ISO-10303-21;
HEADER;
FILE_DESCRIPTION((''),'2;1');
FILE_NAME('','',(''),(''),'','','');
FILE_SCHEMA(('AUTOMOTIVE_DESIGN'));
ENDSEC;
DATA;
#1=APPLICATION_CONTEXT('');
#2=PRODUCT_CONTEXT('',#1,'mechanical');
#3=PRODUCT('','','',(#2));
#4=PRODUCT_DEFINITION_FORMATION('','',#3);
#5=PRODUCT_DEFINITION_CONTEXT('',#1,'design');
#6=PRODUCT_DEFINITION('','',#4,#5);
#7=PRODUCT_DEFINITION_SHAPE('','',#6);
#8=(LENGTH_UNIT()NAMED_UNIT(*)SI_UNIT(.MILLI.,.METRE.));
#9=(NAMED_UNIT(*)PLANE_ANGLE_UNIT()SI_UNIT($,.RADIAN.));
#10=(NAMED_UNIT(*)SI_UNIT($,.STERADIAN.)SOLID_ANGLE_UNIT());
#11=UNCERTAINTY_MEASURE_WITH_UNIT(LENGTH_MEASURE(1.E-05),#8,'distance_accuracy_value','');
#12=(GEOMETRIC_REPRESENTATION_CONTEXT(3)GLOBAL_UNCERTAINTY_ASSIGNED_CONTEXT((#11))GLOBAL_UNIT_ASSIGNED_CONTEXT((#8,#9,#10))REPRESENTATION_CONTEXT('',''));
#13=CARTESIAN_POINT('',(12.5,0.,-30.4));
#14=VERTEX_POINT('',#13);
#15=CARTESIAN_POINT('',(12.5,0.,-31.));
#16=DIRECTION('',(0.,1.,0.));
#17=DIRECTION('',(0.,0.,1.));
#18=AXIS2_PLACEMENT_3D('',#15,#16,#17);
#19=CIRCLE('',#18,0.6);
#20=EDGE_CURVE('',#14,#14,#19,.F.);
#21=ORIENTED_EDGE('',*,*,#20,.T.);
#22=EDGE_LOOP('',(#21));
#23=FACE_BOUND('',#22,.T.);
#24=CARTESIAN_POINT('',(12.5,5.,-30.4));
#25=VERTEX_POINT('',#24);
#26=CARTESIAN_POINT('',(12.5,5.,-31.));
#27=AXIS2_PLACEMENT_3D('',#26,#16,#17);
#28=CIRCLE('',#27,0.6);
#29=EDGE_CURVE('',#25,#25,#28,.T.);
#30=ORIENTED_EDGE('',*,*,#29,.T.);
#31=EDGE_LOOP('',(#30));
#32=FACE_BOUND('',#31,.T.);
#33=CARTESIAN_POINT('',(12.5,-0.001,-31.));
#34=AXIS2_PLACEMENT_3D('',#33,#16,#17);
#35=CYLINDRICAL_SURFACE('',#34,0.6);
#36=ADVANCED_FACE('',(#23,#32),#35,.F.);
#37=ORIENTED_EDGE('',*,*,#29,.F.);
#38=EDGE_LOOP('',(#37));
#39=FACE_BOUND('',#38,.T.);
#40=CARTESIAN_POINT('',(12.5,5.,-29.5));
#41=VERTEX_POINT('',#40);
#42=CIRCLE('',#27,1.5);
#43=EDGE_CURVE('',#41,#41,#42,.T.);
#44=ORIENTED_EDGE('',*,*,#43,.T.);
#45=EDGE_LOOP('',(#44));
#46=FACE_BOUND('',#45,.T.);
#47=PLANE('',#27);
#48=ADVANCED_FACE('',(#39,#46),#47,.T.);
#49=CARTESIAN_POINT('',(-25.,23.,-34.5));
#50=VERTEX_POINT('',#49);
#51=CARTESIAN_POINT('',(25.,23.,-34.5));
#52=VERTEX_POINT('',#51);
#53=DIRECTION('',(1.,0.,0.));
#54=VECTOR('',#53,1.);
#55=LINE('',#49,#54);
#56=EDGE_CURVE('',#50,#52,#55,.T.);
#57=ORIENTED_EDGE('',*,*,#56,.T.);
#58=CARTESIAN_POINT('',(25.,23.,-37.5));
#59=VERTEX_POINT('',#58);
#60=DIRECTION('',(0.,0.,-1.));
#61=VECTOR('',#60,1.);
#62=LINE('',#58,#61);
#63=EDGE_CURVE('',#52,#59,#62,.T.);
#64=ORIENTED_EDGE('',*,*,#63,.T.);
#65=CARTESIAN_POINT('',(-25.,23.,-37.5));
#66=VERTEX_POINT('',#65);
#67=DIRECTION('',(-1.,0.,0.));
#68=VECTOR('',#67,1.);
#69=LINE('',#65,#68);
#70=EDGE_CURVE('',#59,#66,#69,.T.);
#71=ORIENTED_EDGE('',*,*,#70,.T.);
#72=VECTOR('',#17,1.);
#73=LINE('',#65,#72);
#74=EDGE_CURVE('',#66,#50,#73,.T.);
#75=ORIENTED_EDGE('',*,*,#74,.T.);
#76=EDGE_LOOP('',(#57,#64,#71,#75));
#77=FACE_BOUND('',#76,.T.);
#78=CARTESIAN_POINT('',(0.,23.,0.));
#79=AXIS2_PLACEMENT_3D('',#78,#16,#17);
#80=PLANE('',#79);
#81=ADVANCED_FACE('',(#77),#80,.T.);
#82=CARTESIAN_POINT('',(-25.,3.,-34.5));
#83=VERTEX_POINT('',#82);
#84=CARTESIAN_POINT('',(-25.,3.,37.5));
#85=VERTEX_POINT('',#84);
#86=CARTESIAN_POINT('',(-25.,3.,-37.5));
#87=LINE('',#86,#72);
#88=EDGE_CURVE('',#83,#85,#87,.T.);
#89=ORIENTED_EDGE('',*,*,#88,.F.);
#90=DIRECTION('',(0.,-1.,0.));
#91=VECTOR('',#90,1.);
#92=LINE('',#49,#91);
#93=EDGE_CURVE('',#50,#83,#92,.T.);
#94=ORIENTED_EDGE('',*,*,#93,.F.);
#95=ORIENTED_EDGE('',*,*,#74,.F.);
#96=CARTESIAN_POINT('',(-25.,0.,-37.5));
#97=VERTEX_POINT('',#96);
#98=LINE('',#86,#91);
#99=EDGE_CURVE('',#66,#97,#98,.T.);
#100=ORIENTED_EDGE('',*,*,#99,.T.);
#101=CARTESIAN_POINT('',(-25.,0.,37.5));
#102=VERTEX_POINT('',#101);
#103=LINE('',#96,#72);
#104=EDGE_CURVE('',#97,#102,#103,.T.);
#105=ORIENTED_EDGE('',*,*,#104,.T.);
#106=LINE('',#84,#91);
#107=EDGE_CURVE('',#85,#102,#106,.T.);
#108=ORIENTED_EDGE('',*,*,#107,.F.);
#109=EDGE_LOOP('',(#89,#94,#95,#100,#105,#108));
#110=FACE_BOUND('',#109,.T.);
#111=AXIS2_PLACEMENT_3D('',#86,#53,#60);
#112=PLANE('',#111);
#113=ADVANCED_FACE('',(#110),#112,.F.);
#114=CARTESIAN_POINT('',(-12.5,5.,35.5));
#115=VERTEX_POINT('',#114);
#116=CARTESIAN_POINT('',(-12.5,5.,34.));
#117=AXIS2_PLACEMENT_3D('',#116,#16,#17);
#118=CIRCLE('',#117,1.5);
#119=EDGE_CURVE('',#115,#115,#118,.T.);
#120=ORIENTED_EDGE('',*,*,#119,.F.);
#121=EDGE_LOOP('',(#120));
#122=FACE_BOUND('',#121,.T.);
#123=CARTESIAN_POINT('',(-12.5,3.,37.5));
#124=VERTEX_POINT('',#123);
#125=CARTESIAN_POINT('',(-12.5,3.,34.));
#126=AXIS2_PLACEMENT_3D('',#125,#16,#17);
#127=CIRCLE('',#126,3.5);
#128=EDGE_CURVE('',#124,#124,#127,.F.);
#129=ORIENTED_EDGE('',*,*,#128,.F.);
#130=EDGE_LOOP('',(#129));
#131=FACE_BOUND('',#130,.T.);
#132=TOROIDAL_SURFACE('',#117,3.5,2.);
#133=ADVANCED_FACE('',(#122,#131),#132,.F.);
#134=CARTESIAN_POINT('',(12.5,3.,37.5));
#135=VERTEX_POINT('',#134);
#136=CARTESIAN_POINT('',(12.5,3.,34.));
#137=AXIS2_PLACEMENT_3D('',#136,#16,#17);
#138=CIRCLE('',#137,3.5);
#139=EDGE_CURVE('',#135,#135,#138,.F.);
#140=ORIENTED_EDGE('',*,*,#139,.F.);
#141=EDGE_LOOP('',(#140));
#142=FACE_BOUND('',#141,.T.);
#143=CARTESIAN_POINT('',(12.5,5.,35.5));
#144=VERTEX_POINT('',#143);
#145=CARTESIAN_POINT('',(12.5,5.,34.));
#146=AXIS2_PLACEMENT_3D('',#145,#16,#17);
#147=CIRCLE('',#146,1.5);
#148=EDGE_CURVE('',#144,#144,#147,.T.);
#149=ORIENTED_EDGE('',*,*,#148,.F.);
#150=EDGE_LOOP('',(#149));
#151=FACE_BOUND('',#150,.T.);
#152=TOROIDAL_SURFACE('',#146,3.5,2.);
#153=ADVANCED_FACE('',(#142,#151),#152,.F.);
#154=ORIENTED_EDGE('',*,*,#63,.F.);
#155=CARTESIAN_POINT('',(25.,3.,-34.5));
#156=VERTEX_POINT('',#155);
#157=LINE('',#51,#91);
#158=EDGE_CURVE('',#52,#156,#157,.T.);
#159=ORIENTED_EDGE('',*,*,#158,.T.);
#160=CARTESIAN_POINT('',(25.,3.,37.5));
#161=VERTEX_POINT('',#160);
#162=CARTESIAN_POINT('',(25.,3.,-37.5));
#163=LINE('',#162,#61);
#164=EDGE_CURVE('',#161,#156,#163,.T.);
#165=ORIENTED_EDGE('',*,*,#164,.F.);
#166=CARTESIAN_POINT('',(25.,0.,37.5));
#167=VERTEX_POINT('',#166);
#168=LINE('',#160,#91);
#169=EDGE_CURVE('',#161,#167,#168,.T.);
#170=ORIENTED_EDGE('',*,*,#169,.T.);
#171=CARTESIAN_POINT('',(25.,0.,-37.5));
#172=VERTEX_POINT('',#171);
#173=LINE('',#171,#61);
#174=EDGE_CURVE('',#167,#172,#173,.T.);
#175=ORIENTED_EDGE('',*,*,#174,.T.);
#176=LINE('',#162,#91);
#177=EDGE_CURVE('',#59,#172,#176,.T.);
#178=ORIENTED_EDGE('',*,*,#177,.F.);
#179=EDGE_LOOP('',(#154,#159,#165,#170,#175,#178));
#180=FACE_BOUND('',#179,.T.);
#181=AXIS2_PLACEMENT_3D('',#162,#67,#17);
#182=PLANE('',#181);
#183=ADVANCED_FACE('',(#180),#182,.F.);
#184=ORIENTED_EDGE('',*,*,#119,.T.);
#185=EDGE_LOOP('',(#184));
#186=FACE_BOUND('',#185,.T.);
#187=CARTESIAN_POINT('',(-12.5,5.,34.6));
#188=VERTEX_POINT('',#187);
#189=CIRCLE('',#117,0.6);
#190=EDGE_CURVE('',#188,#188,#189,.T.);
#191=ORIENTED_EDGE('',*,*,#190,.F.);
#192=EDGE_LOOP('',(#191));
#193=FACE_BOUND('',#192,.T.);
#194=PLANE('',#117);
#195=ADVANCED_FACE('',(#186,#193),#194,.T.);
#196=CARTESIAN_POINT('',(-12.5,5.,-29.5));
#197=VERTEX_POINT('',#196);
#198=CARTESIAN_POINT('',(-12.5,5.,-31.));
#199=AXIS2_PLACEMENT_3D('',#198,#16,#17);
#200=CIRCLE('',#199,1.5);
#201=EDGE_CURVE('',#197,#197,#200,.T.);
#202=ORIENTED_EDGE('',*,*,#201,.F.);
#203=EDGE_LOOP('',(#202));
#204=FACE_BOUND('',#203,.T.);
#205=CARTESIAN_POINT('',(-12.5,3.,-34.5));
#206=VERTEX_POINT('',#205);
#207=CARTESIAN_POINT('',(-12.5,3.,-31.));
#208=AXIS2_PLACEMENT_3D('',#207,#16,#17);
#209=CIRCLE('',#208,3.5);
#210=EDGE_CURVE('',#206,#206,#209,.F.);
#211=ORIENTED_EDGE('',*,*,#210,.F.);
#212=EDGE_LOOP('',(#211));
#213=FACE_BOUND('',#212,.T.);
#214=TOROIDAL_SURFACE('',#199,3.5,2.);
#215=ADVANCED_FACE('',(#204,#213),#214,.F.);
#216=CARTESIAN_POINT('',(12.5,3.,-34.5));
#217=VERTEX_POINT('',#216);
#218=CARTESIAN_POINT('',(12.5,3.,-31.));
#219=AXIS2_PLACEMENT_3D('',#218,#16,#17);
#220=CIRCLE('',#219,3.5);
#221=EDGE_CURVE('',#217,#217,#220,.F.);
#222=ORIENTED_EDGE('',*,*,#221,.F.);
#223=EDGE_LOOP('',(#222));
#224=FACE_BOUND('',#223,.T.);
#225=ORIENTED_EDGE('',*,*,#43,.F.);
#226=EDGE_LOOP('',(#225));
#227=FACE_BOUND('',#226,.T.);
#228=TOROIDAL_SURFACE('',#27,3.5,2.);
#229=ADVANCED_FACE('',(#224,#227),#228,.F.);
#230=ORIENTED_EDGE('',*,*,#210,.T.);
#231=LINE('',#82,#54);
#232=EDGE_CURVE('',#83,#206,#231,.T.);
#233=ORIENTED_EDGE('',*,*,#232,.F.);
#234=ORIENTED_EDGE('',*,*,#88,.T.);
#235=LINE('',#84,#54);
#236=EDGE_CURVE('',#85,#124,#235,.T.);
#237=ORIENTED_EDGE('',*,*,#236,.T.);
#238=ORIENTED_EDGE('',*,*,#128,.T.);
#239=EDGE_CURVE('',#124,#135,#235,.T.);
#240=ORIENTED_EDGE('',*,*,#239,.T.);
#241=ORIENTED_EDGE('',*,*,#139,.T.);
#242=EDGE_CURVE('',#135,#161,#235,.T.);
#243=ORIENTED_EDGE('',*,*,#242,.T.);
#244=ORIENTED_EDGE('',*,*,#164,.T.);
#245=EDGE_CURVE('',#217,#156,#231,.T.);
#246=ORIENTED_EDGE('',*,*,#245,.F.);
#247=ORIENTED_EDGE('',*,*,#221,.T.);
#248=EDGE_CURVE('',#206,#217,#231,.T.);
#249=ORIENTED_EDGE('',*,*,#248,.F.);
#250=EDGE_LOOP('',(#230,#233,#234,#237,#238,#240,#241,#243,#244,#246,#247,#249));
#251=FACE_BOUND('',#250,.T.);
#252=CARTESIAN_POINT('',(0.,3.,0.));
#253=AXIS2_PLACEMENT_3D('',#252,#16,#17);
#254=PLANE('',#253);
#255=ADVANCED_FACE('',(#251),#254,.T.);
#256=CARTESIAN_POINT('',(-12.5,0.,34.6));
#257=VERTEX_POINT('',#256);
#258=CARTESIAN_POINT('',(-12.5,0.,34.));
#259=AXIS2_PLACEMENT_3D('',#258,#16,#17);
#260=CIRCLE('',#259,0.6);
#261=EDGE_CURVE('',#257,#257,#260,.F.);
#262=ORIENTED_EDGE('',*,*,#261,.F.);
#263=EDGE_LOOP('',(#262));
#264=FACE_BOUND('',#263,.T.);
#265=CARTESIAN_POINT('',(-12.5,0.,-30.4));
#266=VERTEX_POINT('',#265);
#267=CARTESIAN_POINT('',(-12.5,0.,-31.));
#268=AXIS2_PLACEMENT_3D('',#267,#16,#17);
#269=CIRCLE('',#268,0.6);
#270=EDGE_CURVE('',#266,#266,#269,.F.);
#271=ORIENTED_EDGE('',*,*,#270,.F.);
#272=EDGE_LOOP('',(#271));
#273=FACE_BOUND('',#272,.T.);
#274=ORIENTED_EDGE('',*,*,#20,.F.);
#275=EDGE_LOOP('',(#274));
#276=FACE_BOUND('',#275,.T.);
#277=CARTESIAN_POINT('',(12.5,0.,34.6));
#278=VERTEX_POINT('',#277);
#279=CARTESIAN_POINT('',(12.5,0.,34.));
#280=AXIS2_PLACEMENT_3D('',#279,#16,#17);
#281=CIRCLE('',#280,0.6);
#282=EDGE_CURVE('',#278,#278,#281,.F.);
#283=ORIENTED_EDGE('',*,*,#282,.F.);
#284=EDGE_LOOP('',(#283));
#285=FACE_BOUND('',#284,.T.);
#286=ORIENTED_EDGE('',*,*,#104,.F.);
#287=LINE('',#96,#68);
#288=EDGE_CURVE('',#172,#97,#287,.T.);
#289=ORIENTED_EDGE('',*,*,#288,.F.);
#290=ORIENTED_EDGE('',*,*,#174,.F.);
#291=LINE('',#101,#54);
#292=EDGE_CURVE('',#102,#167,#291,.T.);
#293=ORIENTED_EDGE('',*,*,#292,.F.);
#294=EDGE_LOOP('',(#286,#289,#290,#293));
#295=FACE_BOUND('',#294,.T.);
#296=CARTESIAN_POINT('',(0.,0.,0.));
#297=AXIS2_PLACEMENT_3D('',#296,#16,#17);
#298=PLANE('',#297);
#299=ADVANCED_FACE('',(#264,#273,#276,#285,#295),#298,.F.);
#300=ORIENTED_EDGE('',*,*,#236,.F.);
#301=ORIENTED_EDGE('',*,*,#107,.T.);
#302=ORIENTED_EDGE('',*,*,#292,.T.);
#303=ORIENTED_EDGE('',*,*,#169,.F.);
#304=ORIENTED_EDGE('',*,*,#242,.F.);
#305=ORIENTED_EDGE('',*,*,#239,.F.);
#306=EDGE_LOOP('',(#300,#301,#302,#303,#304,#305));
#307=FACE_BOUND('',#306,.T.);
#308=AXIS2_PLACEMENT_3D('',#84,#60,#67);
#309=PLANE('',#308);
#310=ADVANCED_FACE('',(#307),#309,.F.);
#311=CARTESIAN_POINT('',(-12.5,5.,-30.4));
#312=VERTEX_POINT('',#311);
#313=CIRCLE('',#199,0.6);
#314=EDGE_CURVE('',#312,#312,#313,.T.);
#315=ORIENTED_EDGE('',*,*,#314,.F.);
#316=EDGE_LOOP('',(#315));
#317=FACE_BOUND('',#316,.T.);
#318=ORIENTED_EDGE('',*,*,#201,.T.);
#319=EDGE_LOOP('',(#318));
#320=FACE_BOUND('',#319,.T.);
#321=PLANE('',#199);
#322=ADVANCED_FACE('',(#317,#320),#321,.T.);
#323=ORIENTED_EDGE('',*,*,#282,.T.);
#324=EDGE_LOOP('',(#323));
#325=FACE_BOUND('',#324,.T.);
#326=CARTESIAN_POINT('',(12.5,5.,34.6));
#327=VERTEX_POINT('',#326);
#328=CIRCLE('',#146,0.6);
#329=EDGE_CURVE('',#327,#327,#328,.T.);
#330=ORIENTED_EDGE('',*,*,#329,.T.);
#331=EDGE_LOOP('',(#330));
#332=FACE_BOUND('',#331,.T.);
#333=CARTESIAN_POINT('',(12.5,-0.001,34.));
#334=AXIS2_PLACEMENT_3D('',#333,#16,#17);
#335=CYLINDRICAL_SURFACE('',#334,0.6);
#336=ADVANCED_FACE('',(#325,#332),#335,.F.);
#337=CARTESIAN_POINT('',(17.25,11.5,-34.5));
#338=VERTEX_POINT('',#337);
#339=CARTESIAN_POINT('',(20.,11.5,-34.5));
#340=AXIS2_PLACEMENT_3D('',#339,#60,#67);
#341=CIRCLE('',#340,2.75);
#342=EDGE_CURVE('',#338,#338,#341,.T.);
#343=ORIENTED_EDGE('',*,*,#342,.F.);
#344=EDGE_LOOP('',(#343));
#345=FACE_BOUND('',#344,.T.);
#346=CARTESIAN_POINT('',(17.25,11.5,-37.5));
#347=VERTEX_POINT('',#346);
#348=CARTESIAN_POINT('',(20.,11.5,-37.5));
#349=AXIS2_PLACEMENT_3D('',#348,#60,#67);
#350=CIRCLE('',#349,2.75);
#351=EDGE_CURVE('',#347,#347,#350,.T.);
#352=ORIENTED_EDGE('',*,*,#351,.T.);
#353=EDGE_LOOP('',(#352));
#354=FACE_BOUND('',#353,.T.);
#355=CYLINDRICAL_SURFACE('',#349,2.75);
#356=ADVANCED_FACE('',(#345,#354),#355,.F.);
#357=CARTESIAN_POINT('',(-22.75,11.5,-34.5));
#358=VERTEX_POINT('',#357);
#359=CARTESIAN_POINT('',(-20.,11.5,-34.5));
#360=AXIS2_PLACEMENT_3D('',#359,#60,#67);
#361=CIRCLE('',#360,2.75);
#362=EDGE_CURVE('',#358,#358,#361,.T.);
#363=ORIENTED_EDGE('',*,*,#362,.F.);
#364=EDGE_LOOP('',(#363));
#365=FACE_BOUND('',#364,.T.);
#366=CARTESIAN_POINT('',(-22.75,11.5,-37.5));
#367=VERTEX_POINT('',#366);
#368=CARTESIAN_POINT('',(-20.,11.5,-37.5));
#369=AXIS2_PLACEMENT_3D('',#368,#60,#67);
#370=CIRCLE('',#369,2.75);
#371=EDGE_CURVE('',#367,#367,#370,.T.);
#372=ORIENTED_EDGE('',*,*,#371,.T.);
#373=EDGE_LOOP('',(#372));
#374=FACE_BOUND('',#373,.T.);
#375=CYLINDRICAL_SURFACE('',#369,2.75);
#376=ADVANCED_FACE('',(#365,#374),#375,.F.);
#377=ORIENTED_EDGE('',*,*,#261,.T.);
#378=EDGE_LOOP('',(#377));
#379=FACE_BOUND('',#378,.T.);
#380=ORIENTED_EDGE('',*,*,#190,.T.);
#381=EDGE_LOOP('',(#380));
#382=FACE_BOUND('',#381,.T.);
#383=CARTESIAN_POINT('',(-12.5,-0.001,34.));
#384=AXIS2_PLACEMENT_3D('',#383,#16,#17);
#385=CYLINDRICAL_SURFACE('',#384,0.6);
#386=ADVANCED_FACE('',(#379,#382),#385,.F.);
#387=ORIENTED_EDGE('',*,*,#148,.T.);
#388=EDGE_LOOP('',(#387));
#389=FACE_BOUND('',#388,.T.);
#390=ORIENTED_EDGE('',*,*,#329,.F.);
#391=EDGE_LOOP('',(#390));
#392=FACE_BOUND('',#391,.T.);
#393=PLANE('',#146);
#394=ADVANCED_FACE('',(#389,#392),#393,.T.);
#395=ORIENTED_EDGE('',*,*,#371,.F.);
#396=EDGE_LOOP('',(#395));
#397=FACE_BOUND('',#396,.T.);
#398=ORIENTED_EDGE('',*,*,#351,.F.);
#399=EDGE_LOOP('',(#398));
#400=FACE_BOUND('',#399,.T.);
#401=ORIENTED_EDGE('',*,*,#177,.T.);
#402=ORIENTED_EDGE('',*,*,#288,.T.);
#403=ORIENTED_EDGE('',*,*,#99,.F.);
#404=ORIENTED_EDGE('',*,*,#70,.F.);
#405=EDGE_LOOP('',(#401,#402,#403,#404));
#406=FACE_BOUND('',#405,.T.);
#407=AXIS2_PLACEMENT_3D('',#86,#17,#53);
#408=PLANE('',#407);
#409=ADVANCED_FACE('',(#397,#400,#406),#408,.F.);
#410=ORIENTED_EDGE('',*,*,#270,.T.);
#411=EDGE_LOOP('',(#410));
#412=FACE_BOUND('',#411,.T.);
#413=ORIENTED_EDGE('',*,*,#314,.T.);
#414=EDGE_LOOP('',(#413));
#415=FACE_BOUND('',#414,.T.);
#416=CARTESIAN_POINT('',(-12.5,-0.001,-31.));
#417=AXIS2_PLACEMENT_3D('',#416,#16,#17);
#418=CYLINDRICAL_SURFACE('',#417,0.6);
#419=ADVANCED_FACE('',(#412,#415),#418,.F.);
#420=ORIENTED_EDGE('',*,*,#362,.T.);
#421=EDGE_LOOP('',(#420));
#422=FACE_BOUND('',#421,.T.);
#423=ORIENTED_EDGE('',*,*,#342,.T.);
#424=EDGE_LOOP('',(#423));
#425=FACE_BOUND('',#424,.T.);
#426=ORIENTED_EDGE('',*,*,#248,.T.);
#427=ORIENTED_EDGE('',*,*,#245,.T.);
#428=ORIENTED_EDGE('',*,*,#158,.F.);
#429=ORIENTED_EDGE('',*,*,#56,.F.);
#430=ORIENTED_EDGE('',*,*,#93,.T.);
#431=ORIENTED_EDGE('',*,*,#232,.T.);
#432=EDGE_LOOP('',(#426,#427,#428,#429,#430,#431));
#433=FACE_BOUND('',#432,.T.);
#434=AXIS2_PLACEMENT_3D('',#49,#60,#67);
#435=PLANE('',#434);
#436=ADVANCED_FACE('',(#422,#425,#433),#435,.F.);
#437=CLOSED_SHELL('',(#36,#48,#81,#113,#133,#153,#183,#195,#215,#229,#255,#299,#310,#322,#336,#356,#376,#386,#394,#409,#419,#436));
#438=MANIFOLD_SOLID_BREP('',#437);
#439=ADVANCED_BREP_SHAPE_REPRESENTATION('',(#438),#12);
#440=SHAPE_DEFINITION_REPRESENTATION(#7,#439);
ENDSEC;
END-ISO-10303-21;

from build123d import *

# Parameters (mm, degrees)
SKETCH1_W                      = 50
SKETCH1_H                      = 75
BOSS_EXTRUDE1_DEPTH            = 3
SKETCH2_W                      = 50
SKETCH2_H                      = 3
BOSS_EXTRUDE2_DEPTH            = 20
M5_CLEARANCE_HOLE1_D           = 5.5
M5_CLEARANCE_HOLE1_ON_FACE_2_D = 5.5
SKETCH6_R                      = 1.5
BOSS_EXTRUDE3_DEPTH            = 2
CUT_EXTRUDE1_REACH             = 50.531
SKETCH7_R                      = 0.6
FILLET1_R                      = 2


with BuildPart() as part:
    # Sketch1 → Boss-Extrude1 (new body)
    with BuildSketch(Plane(origin=(0, 0, 0), x_dir=(1, 0, 0), z_dir=(0, 1, 0))):
        Rectangle(SKETCH1_W, SKETCH1_H)
    extrude(amount=BOSS_EXTRUDE1_DEPTH)

    # Sketch2 → Boss-Extrude2 (add)
    with BuildSketch(Plane(origin=(0, 3, 0), x_dir=(1, 0, 0), z_dir=(0, 1, 0))):
        with Locations((0, 36)):
            Rectangle(SKETCH2_W, SKETCH2_H)
    extrude(amount=BOSS_EXTRUDE2_DEPTH)

    # M5 Clearance Hole1 (through all)
    with Locations(Plane(origin=(20, 11.5, -37.5), x_dir=(-1, 0, 0), z_dir=(0, 0, -1))):
        with Locations((0, 0), (40, 0)):
            Hole(M5_CLEARANCE_HOLE1_D / 2)

    # M5 Clearance Hole1 on face 2 (through all)
    with Locations(Plane(origin=(-94.663434395, 64.222873605, 0), x_dir=(-1, 0, 0), z_dir=(0, 0, -1))):
        with Locations((0, 0)):
            Hole(M5_CLEARANCE_HOLE1_ON_FACE_2_D / 2)

    # Sketch6 → Boss-Extrude3 (add)
    with BuildSketch(Plane(origin=(0, 3, 0), x_dir=(1, 0, 0), z_dir=(0, 1, 0))):
        with Locations(Location((-12.5, 31, 0), (0, 0, 270))):
            Circle(SKETCH6_R)
        with Locations(Location((12.5, 31, 0), (0, 0, 270))):
            Circle(SKETCH6_R)
        with Locations(Location((12.5, -34, 0), (0, 0, 270))):
            Circle(SKETCH6_R)
        with Locations(Location((-12.5, -34, 0), (0, 0, 270))):
            Circle(SKETCH6_R)
    extrude(amount=BOSS_EXTRUDE3_DEPTH)

    # Sketch7 → Cut-Extrude1 (cut, up to next)
    with BuildSketch(Plane(origin=(0, 5, 0), x_dir=(1, 0, 0), z_dir=(0, 1, 0)), mode=Mode.PRIVATE) as cut_extrude1_sk1:
        with Locations(Location((-12.5, 31, 0), (0, 0, 270))):
            Circle(SKETCH7_R)
    cut_extrude1_tool1 = extrude(cut_extrude1_sk1.sketch, amount=-CUT_EXTRUDE1_REACH, mode=Mode.PRIVATE) & part.part
    # Sketch7 → Cut-Extrude1 (cut, up to next)
    with BuildSketch(Plane(origin=(0, 5, 0), x_dir=(1, 0, 0), z_dir=(0, 1, 0)), mode=Mode.PRIVATE) as cut_extrude1_sk2:
        with Locations(Location((12.5, 31, 0), (0, 0, 270))):
            Circle(SKETCH7_R)
    cut_extrude1_tool2 = extrude(cut_extrude1_sk2.sketch, amount=-CUT_EXTRUDE1_REACH, mode=Mode.PRIVATE) & part.part
    # Sketch7 → Cut-Extrude1 (cut, up to next)
    with BuildSketch(Plane(origin=(0, 5, 0), x_dir=(1, 0, 0), z_dir=(0, 1, 0)), mode=Mode.PRIVATE) as cut_extrude1_sk3:
        with Locations(Location((12.5, -34, 0), (0, 0, 270))):
            Circle(SKETCH7_R)
    cut_extrude1_tool3 = extrude(cut_extrude1_sk3.sketch, amount=-CUT_EXTRUDE1_REACH, mode=Mode.PRIVATE) & part.part
    # Sketch7 → Cut-Extrude1 (cut, up to next)
    with BuildSketch(Plane(origin=(0, 5, 0), x_dir=(1, 0, 0), z_dir=(0, 1, 0)), mode=Mode.PRIVATE) as cut_extrude1_sk4:
        with Locations(Location((-12.5, -34, 0), (0, 0, 270))):
            Circle(SKETCH7_R)
    cut_extrude1_tool4 = extrude(cut_extrude1_sk4.sketch, amount=-CUT_EXTRUDE1_REACH, mode=Mode.PRIVATE) & part.part
    add(cut_extrude1_tool1.solids().sort_by_distance((-12.5, 5, -31))[0], mode=Mode.SUBTRACT)
    add(cut_extrude1_tool2.solids().sort_by_distance((12.5, 5, -31))[0], mode=Mode.SUBTRACT)
    add(cut_extrude1_tool3.solids().sort_by_distance((12.5, 5, 34))[0], mode=Mode.SUBTRACT)
    add(cut_extrude1_tool4.solids().sort_by_distance((-12.5, 5, 34))[0], mode=Mode.SUBTRACT)

    # Fillet1
    fillet1_edges = [part.edges().sort_by_distance(p)[0] for p in [
        (-12.5, 3, -32.5),
        (12.5, 3, -32.5),
        (12.5, 3, 32.5),
        (-12.5, 3, 32.5),
    ]]
    fillet(fillet1_edges, radius=FILLET1_R - 0.0001)  # a hair under: the kernel refuses the full size


solid = part.part
